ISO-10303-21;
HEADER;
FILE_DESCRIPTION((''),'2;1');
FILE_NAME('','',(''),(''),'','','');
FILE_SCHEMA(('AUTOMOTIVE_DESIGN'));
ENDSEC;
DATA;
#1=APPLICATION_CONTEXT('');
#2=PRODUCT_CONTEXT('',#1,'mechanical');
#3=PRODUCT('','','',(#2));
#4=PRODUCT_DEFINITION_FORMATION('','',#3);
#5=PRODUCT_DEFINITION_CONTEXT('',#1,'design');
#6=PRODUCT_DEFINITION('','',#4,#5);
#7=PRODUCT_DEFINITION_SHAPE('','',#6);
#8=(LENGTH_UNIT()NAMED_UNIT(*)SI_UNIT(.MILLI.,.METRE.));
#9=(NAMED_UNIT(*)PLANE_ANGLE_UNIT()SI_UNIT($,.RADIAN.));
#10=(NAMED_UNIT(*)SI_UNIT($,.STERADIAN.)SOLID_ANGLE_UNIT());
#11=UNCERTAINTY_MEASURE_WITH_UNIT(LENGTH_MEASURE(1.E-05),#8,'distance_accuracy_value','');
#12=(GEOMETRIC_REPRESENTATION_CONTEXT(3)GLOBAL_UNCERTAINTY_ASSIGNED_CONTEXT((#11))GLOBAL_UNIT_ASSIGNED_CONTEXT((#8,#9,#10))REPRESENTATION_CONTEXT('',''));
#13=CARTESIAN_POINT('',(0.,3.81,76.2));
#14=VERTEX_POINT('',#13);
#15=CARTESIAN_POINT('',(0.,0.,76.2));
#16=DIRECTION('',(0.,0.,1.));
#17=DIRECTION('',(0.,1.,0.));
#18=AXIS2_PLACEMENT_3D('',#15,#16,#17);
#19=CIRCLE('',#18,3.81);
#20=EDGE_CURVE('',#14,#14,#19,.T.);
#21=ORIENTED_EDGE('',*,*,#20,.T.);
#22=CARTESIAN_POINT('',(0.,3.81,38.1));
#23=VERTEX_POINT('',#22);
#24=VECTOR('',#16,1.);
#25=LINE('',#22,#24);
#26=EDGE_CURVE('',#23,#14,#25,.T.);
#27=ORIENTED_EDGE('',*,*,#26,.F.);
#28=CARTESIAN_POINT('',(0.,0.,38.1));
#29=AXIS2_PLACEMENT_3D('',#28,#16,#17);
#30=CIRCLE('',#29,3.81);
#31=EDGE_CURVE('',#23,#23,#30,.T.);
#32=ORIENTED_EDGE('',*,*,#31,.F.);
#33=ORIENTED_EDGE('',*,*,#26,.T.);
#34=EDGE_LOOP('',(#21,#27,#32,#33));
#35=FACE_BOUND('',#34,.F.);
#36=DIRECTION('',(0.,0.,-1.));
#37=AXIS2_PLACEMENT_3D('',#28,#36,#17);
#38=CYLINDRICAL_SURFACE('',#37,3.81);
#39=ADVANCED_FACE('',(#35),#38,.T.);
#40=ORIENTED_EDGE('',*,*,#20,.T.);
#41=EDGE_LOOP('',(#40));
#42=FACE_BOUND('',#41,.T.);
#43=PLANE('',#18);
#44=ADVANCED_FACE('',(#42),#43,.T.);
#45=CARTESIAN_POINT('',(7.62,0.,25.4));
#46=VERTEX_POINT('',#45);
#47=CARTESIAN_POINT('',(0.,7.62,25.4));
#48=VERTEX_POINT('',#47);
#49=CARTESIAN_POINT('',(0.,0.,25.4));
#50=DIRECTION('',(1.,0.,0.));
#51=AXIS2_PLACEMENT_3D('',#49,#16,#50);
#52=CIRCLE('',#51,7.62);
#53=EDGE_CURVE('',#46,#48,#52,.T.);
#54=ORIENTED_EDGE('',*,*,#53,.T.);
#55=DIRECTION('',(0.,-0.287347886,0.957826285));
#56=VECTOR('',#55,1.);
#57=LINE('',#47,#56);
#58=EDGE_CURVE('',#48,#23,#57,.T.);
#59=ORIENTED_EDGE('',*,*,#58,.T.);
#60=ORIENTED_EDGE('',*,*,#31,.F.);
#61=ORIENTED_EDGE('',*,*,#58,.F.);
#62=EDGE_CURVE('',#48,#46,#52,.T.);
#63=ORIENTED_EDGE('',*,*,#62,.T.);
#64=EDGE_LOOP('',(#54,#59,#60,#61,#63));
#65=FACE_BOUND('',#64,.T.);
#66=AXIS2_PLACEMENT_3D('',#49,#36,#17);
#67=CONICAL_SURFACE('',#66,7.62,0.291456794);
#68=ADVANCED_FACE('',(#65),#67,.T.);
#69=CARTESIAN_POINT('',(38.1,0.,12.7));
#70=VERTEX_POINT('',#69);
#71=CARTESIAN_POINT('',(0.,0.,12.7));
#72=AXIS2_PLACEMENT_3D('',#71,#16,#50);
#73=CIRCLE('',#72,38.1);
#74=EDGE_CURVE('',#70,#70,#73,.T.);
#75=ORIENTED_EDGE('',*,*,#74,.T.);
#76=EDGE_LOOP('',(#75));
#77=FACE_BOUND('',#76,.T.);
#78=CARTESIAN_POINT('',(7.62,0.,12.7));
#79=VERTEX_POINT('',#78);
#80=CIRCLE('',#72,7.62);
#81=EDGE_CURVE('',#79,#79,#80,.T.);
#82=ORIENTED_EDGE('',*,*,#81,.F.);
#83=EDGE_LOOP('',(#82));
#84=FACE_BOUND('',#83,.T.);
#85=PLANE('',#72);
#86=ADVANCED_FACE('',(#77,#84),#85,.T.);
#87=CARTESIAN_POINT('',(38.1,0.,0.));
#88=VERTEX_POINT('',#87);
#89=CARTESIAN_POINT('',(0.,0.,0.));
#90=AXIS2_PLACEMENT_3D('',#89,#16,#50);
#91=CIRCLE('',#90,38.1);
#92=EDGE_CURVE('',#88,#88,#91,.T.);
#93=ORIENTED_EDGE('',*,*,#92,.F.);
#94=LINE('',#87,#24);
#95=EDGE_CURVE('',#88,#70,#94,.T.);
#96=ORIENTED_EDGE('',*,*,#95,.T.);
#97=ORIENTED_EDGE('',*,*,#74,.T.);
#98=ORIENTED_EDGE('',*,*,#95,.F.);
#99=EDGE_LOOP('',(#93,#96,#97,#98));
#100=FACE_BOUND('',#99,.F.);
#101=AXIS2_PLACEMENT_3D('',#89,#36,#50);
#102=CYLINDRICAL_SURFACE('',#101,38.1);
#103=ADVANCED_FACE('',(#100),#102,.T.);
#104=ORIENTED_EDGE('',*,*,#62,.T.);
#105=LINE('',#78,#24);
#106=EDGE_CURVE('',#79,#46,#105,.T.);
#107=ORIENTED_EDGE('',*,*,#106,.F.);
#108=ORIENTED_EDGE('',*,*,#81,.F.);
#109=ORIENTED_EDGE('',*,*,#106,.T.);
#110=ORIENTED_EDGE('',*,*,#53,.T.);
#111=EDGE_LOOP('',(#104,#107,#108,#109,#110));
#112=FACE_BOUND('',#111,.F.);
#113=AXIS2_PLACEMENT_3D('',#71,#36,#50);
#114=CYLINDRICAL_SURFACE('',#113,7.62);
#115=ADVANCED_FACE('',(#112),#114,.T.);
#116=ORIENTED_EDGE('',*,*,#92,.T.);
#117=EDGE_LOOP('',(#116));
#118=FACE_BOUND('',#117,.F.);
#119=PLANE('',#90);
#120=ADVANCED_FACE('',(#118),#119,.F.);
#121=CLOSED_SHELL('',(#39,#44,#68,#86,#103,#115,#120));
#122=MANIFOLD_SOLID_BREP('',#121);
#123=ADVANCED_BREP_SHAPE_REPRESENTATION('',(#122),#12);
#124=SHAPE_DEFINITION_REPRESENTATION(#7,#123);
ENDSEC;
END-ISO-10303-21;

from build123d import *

# Parameters (mm, degrees)
F0_R     = 38.1
F1_DEPTH = 12.7
F2_R     = 7.62
F3_DEPTH = 12.7
F6_DEPTH = 38.1


# Not quite as in the source:
# - a feature names something its author has since deleted; it is built from what else it names


with BuildPart() as f1:
    # F0 (on Top) → F1 (new body)
    with BuildSketch(Plane.XY):
        Circle(F0_R)
    extrude(amount=F1_DEPTH)

    # F2 (on face) → F3 (join)
    with BuildSketch(Plane.XY.offset(12.7)):
        Circle(F2_R)
    extrude(amount=F3_DEPTH)

    # F4 (on Right) → F5 (revolve)
    with BuildSketch(Plane.YZ):
        Polygon((0, 38.1), (0, 25.4), (7.62, 25.4), (3.81, 38.1), align=None)
    revolve(axis=Axis((0, 0, 31.75), (0, 0, 1)))

    # F6 (add): a face of the model
    f6_faces = [f1.faces().sort_by_distance(p)[0] for p in [
        (0, 0, 38.1),
    ]]
    extrude(f6_faces, amount=F6_DEPTH)


solid = f1.part
